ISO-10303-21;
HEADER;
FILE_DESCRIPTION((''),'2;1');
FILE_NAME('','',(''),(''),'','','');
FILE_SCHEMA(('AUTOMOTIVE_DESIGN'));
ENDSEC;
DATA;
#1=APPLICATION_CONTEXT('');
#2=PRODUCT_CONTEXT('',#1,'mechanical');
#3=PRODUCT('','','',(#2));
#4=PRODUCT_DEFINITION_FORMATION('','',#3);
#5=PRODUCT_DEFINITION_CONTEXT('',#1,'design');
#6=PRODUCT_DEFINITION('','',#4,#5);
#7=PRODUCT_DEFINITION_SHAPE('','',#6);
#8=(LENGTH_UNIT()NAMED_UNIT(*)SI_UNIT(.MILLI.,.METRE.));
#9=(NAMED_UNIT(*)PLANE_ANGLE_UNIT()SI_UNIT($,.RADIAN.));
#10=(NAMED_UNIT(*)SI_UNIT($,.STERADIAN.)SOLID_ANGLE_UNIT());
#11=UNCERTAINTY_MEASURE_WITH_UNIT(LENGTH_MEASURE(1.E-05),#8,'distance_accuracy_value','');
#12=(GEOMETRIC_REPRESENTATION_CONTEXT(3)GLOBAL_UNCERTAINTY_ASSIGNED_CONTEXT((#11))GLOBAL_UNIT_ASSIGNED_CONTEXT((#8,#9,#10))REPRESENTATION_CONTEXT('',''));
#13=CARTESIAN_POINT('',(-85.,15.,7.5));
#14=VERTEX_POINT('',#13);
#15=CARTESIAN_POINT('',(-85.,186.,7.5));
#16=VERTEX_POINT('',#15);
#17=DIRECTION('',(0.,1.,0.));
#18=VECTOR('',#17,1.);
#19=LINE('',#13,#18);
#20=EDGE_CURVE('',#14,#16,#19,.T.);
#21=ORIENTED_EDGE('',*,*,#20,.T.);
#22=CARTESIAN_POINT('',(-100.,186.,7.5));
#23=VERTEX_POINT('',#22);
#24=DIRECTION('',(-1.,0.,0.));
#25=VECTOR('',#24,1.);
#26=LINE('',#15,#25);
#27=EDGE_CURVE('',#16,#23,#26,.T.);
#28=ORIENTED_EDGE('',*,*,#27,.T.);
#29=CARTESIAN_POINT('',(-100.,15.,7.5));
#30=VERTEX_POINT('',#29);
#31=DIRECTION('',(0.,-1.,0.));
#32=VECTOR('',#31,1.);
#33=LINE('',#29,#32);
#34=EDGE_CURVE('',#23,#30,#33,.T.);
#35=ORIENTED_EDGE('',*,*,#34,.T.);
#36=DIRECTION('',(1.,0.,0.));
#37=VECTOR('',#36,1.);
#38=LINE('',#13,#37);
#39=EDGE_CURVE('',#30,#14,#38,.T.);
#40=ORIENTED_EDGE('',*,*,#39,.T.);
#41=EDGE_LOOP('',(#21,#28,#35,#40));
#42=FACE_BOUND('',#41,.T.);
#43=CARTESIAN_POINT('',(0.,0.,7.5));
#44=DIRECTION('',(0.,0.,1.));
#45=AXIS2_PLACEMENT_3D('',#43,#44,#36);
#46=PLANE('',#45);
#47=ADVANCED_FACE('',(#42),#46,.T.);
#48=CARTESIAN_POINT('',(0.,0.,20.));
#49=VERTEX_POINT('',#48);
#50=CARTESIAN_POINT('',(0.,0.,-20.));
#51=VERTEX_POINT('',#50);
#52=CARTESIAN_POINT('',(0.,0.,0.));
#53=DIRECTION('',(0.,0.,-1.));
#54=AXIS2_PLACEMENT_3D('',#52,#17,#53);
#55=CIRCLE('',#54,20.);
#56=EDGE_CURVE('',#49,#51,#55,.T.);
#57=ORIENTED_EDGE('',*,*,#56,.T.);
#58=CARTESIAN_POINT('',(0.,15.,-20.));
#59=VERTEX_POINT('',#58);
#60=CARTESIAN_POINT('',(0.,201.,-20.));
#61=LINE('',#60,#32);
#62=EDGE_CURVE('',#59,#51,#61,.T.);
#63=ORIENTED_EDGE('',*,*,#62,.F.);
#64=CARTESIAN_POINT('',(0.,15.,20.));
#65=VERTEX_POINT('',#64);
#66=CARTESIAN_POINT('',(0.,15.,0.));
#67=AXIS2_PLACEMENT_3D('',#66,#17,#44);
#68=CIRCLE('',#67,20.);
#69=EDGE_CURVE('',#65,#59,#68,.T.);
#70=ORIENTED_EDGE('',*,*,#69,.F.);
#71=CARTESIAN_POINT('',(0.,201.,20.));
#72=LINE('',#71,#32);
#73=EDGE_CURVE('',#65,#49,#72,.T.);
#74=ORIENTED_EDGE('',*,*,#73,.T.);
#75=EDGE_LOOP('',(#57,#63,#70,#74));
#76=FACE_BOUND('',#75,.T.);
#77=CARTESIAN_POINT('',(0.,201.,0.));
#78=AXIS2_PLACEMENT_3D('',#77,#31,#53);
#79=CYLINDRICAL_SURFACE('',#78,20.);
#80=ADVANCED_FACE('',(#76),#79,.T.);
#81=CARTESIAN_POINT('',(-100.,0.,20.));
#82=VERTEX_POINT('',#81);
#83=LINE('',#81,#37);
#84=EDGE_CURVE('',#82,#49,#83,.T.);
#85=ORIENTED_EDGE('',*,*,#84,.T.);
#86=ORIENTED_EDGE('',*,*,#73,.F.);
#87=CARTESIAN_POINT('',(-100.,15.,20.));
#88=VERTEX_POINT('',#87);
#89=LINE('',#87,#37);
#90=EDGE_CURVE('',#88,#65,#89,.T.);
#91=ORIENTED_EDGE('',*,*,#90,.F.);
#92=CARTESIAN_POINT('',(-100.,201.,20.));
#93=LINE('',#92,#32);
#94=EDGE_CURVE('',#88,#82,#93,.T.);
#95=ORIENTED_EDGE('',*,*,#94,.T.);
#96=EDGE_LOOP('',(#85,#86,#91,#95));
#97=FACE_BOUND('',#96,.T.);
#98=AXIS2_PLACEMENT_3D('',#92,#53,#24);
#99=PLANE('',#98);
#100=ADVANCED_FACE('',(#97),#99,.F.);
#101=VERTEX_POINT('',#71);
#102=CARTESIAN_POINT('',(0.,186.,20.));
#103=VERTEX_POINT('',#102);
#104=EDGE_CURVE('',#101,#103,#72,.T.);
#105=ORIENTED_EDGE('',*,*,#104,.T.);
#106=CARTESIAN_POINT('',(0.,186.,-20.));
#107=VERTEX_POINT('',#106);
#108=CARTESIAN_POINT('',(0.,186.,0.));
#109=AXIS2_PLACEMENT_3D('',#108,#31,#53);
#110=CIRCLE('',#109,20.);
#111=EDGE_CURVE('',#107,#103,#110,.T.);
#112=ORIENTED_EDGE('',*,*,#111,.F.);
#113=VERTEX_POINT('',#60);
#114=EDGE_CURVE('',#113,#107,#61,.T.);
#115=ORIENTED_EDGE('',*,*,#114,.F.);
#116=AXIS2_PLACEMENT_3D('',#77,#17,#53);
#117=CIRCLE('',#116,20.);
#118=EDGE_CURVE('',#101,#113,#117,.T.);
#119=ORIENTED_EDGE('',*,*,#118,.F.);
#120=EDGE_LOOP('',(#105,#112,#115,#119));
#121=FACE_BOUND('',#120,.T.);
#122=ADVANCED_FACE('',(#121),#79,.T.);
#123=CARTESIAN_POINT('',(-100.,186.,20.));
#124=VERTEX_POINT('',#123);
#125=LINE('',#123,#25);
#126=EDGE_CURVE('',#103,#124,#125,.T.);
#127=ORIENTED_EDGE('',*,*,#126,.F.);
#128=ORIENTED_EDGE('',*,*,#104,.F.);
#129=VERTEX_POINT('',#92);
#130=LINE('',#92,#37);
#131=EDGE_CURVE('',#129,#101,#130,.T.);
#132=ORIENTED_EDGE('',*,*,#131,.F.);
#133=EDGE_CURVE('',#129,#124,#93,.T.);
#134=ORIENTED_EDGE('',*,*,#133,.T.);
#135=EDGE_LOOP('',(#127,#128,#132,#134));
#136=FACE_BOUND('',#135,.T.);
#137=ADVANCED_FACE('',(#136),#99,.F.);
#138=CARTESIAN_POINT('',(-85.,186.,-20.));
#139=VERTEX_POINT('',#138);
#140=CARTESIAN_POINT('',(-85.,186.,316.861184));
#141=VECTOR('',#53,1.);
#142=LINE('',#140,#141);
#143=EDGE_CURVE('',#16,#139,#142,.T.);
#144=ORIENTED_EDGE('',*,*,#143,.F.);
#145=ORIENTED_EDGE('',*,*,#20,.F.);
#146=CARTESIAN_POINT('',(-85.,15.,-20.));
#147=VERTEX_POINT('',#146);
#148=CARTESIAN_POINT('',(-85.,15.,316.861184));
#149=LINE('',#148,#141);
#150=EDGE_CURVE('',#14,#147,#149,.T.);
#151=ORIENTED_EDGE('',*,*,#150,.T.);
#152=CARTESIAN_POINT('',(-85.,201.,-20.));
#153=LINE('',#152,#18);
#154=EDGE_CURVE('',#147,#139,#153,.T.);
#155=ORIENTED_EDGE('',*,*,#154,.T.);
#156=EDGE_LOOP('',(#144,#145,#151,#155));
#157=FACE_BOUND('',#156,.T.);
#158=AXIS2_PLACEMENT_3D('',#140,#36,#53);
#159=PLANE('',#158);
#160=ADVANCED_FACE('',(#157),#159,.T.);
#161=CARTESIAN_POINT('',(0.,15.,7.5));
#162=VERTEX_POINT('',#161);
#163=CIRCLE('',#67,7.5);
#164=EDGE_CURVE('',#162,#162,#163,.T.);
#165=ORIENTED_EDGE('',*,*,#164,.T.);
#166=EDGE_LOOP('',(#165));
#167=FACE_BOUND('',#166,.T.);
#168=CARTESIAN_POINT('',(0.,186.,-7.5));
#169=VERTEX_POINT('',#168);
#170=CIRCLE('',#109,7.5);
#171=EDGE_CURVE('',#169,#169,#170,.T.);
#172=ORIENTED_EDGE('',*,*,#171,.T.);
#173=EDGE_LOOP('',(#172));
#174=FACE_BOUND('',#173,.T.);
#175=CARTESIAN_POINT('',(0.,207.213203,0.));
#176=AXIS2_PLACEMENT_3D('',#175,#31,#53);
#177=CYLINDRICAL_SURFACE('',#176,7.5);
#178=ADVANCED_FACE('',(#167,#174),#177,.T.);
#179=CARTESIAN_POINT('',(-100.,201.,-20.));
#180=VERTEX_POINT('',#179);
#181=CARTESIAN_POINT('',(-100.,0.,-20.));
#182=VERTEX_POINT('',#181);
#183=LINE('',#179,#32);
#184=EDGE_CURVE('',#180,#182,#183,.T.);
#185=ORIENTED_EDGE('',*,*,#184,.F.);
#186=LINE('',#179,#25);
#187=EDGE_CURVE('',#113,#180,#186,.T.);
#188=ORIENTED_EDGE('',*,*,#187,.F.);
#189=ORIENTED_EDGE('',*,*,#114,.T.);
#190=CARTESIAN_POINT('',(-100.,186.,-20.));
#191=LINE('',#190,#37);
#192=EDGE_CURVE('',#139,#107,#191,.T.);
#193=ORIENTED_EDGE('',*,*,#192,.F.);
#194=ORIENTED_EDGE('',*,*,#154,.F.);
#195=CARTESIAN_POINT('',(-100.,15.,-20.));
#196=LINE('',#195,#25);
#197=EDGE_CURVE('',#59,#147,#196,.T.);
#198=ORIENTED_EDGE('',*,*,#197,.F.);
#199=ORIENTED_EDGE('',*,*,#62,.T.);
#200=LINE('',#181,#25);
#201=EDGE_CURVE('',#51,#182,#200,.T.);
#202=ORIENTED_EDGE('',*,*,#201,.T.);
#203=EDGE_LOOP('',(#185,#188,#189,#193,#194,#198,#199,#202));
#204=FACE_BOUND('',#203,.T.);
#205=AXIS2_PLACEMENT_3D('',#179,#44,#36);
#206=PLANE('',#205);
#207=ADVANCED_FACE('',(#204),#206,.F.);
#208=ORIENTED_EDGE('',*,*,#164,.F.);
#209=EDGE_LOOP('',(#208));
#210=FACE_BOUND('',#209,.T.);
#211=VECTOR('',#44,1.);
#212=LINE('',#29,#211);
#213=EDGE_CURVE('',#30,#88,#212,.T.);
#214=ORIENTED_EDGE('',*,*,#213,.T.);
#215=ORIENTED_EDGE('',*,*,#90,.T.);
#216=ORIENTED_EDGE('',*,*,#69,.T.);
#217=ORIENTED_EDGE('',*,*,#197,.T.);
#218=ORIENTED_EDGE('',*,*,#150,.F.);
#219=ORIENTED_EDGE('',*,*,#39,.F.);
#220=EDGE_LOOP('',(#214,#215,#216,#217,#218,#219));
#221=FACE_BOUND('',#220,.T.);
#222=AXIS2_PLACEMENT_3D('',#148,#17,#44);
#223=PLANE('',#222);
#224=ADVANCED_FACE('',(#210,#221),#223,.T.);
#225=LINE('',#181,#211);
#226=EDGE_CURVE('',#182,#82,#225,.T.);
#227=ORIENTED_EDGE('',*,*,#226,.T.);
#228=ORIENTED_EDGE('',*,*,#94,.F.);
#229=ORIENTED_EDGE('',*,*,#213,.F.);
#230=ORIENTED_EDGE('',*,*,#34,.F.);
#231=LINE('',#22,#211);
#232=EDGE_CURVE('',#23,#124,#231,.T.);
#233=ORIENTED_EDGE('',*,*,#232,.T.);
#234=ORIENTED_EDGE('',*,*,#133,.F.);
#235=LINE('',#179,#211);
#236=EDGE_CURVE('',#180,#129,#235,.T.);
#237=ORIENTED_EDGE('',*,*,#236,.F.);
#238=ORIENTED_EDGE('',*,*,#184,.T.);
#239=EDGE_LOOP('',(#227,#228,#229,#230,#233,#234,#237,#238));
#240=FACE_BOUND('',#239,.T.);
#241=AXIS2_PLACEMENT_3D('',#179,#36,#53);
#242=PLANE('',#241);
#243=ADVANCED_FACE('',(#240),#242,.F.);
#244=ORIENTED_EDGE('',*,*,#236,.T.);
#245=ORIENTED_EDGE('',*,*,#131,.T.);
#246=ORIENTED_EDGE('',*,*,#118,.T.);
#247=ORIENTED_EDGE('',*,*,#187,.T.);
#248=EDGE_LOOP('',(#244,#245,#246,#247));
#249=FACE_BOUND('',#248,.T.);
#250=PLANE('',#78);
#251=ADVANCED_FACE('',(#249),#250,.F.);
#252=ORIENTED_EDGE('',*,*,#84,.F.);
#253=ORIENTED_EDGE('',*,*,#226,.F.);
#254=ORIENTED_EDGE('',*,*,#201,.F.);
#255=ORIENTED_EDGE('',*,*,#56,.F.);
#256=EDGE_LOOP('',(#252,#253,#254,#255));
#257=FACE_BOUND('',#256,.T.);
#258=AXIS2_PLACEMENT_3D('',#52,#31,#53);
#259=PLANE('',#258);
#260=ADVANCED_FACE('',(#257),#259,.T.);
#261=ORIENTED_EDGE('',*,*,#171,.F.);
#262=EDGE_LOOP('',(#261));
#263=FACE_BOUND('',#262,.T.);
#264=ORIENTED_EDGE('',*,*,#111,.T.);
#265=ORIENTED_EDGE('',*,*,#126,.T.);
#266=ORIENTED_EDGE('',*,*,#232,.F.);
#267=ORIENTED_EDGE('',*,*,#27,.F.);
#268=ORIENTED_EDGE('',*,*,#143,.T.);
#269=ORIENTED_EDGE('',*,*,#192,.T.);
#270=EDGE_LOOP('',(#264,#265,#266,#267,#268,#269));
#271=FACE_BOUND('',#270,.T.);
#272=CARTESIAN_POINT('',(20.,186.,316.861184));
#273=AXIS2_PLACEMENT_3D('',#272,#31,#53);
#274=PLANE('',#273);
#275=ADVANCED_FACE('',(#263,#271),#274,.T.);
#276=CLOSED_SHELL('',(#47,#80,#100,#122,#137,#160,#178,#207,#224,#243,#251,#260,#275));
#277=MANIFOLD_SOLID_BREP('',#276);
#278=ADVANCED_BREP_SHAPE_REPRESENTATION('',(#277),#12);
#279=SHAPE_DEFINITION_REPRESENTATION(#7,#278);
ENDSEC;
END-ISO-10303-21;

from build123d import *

# Parameters (mm, degrees)
BOSS_EXTRUDE1_DEPTH    = 201
CUT_EXTRUDE1_START     = -40
CUT_EXTRUDE1_OUTLINE_W = 106
CUT_EXTRUDE1_OUTLINE_H = 171
CUT_EXTRUDE1_DEPTH     = 40
SKETCH3_R              = 7.5
BOSS_EXTRUDE2_DEPTH    = 171
SKETCH4_W              = 15
SKETCH4_H              = 171
CUT_EXTRUDE2_DEPTH     = 12.5


# Read off the part's stored shape, not the designer's step: Cut-Extrude1
with BuildPart() as part:
    # Sketch1 → Boss-Extrude1 (new body)
    with BuildSketch(Plane(origin=(0, 0, 0), x_dir=(1, 0, 0), z_dir=(0, 1, 0))):
        with BuildLine():
            Line((-100, 20), (0, 20))
            ThreePointArc((0, 20), (20, 0), (0, -20))
            Line((0, -20), (-100, -20))
            Line((-100, -20), (-100, 20))
        make_face()
    extrude(amount=BOSS_EXTRUDE1_DEPTH)

    # Cut-Extrude1 outline → Cut-Extrude1 (cut)
    with BuildSketch(Plane.XY.offset(20).offset(CUT_EXTRUDE1_START)):
        with Locations((-32, 100.5)):
            Rectangle(CUT_EXTRUDE1_OUTLINE_W, CUT_EXTRUDE1_OUTLINE_H)
    extrude(amount=CUT_EXTRUDE1_DEPTH, mode=Mode.SUBTRACT)

    # Sketch3 → Boss-Extrude2 (add)
    with BuildSketch(Plane(origin=(0, 15, 0), x_dir=(1, 0, 0), z_dir=(0, 1, 0))):
        with Locations(Location((0, 0, 0), (0, 0, 90))):
            Circle(SKETCH3_R)
    extrude(amount=BOSS_EXTRUDE2_DEPTH)

    # Sketch4 → Cut-Extrude2 (cut)
    with BuildSketch(Plane.XY.offset(20)):
        with Locations((-92.5, 100.5)):
            Rectangle(SKETCH4_W, SKETCH4_H)
    extrude(amount=-CUT_EXTRUDE2_DEPTH, mode=Mode.SUBTRACT)


solid = part.part
